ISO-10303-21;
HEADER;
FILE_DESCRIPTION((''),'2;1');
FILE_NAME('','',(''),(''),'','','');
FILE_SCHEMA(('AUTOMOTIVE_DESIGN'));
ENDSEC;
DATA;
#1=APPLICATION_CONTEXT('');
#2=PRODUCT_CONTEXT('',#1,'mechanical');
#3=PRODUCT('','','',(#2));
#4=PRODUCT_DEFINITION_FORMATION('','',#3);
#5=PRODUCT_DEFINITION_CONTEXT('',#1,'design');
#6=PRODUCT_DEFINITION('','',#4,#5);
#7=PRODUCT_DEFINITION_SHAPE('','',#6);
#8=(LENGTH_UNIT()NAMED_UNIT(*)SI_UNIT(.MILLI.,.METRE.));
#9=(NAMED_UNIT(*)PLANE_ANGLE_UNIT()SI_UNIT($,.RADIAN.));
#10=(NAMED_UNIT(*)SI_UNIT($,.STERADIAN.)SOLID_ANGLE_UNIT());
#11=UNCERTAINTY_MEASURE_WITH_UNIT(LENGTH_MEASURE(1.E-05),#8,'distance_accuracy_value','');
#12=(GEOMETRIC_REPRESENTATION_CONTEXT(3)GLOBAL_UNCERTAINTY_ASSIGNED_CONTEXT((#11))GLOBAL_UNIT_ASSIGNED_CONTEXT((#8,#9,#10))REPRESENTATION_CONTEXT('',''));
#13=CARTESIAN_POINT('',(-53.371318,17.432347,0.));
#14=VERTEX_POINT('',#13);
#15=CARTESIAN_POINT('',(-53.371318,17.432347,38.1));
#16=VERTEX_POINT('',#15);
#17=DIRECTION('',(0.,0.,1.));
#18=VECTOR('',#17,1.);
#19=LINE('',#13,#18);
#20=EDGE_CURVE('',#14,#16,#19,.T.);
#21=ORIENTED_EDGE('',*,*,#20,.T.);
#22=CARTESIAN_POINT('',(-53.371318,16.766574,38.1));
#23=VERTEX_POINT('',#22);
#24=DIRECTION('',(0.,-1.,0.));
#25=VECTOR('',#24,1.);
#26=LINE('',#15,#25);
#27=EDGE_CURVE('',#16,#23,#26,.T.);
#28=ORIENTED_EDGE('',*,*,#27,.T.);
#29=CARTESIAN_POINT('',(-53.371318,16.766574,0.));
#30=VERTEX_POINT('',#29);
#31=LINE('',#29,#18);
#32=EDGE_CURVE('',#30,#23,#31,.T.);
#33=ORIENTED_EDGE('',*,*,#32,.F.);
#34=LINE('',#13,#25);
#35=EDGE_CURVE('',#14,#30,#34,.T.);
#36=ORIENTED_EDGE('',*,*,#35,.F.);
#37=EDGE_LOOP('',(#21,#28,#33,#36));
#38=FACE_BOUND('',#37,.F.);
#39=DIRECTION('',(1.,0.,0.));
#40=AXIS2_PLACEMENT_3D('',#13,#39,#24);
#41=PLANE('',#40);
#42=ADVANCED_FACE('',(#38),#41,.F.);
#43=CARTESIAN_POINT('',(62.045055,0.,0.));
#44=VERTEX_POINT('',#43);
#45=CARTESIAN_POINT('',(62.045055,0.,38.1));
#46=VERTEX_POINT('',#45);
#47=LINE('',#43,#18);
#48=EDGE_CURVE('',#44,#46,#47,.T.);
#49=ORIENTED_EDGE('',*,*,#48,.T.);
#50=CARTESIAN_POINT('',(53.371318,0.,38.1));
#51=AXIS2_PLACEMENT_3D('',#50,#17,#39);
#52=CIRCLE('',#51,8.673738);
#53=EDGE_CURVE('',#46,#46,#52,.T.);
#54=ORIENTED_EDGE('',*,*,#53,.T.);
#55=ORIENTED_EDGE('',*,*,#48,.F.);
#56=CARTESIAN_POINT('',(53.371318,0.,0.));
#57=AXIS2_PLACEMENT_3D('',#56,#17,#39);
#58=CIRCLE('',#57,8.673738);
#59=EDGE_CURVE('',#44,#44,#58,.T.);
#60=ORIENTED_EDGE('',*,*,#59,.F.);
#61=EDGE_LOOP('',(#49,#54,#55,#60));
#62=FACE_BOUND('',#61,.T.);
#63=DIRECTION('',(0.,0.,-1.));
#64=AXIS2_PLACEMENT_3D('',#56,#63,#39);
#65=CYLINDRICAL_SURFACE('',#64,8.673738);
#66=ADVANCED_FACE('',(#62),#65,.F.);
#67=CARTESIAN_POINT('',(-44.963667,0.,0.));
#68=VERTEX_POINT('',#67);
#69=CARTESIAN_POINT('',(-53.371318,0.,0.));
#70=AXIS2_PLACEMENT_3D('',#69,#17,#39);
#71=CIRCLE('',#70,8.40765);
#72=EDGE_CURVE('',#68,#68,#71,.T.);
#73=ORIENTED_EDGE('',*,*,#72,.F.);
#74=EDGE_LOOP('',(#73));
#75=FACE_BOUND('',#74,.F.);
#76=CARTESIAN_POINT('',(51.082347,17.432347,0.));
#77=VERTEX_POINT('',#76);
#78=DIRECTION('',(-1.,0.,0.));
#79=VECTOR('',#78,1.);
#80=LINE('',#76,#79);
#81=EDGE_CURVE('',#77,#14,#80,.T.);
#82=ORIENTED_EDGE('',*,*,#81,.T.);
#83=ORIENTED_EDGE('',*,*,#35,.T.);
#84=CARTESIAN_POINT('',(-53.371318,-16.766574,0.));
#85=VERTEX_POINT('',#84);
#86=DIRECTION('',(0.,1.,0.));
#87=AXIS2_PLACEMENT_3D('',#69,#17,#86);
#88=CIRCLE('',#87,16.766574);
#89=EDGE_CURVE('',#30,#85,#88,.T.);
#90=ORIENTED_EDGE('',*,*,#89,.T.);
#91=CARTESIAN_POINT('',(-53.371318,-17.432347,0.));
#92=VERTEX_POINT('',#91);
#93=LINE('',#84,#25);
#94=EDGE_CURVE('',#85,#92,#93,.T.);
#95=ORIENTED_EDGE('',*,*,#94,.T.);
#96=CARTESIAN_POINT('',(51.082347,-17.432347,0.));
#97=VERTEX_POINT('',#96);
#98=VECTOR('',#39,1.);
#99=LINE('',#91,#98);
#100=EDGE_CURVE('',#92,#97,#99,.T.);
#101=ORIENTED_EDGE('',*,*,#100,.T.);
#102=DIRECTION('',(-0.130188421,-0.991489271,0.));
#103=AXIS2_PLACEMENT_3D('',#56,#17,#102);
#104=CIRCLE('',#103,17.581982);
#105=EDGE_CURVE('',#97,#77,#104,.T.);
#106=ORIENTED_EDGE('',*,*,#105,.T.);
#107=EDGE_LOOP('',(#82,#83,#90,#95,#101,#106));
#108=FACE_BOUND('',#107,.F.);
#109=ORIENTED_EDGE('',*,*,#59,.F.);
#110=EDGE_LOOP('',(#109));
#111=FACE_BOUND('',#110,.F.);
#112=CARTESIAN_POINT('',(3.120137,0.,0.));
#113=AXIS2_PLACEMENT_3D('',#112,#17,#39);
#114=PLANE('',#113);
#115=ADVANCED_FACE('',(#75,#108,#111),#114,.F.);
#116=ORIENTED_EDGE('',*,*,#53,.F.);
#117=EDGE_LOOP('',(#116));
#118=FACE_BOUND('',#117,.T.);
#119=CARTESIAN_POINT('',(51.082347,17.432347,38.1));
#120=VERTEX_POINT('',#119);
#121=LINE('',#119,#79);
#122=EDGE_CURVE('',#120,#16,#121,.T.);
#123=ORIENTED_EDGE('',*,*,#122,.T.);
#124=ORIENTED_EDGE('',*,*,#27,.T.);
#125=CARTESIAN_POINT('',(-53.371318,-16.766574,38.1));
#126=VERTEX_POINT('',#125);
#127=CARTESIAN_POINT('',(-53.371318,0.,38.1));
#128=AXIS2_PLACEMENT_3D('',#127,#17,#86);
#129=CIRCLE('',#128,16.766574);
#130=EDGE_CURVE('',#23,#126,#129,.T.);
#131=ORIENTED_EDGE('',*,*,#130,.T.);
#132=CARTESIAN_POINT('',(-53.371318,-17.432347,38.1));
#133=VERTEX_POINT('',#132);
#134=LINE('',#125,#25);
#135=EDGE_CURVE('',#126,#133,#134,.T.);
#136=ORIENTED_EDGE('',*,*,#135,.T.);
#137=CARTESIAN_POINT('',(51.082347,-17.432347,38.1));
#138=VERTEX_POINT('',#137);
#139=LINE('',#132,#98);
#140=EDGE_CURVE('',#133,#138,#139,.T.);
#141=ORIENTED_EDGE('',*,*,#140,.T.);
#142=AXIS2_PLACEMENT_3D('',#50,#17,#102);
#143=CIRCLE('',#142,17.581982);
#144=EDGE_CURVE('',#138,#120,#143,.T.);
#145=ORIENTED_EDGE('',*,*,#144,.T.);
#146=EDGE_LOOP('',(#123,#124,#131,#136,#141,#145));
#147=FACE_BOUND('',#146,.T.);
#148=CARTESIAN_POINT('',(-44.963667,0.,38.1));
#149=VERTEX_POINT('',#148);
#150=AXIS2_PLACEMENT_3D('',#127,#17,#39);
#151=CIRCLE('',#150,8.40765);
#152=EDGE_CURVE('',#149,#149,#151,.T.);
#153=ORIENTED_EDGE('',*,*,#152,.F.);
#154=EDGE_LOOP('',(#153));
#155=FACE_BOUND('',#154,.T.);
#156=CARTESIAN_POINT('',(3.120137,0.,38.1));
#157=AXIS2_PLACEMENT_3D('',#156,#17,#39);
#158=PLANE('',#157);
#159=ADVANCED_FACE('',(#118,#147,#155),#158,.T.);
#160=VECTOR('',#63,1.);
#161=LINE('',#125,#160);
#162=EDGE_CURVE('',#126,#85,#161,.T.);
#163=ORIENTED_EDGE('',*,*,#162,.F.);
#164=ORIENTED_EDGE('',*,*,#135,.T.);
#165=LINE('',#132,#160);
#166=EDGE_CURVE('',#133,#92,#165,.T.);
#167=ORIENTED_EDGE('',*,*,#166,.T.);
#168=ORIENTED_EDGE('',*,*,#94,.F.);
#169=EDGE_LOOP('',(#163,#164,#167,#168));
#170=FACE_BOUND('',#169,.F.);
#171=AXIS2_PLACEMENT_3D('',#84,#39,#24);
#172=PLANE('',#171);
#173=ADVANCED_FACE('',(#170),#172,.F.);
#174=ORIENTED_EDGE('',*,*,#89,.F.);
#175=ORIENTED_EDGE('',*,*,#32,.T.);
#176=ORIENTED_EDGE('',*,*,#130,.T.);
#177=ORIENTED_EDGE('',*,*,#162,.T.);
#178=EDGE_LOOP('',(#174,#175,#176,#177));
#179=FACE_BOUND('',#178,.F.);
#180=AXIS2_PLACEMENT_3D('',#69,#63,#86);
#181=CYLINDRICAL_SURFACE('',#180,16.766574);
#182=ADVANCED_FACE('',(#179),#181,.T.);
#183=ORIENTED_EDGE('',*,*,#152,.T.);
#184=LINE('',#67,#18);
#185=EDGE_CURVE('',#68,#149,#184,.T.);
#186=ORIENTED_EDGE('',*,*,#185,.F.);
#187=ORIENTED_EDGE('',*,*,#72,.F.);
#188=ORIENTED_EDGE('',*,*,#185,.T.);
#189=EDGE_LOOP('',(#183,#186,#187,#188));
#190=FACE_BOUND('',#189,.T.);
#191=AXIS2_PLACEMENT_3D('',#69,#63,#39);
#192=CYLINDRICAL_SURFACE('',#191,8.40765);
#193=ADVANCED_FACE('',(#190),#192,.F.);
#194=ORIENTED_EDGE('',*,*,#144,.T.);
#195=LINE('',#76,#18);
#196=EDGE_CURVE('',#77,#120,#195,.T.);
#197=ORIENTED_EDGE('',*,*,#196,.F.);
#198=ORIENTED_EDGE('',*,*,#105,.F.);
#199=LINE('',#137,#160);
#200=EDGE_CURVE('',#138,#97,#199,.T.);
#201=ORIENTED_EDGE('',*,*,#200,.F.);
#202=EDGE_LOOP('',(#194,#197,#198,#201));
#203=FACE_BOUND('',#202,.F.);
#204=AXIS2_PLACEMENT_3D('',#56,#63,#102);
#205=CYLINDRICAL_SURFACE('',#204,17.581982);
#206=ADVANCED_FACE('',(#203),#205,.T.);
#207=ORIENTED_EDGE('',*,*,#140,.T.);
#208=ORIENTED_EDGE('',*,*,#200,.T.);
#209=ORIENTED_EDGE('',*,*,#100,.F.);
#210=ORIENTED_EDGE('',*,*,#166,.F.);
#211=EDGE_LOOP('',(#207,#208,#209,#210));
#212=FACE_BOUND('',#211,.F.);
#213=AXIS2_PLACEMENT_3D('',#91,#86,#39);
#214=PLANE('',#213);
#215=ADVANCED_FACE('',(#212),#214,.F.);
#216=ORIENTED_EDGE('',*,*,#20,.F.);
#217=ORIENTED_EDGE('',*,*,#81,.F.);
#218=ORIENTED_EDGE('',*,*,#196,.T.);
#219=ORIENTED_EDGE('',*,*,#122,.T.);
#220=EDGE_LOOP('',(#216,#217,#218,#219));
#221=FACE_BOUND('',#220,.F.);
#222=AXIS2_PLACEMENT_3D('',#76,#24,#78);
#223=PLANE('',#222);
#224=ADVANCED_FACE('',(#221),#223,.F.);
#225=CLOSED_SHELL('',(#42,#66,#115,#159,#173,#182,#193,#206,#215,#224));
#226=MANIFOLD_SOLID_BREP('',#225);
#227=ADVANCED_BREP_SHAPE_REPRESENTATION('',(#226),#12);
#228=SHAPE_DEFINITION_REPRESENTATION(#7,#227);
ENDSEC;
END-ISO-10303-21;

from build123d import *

# Parameters (mm, degrees)
F0_R     = 8.6737376807
F1_DEPTH = 25.4
F0_R_2   = 8.4076501903
F2_DEPTH = 38.1


# Not quite as in the source:
# - a feature names something its author has since deleted; it is built from what else it names


with BuildPart() as f1:
    # F0 (on Top) → F1 (new body)
    with BuildSketch(Plane.XY):
        with BuildLine():
            ThreePointArc((51.0823471633, -17.43234694), (70.9533001066, 0), (51.0823471633, 17.43234694))
            Line((51.0823471633, 17.43234694), (-53.3713176847, 17.43234694))
            Line((-53.3713176847, 17.43234694), (-53.3713176847, 16.7665737877))
            ThreePointArc((-53.3713176847, 16.7665737877), (-41.5155596621, 11.8557580225), (-36.604743897, 0))
            ThreePointArc((-36.604743897, 0), (-41.5155596621, -11.8557580225), (-53.3713176847, -16.7665737877))
            Line((-53.3713176847, -16.7665737877), (-53.3713176847, -17.43234694))
            Line((-53.3713176847, -17.43234694), (51.0823471633, -17.43234694))
        make_face()
        with Locations((53.3713176847, 0)):
            Circle(F0_R, mode=Mode.SUBTRACT)
    extrude(amount=F1_DEPTH)

    # F0 (on Top) → F2 (join)
    with BuildSketch(Plane.XY):
        with BuildLine():
            ThreePointArc((51.0823471633, -17.43234694), (70.9533001066, 0), (51.0823471633, 17.43234694))
            Line((51.0823471633, 17.43234694), (-53.3713176847, 17.43234694))
            Line((-53.3713176847, 17.43234694), (-53.3713176847, 16.7665737877))
            ThreePointArc((-53.3713176847, 16.7665737877), (-41.5155596621, 11.8557580225), (-36.604743897, 0))
            ThreePointArc((-36.604743897, 0), (-41.5155596621, -11.8557580225), (-53.3713176847, -16.7665737877))
            Line((-53.3713176847, -16.7665737877), (-53.3713176847, -17.43234694))
            Line((-53.3713176847, -17.43234694), (51.0823471633, -17.43234694))
        make_face()
        with Locations((53.3713176847, 0)):
            Circle(F0_R, mode=Mode.SUBTRACT)
        with BuildLine():
            ThreePointArc((-36.604743897, 0), (-41.5155596621, 11.8557580225), (-53.3713176847, 16.7665737877))
            ThreePointArc((-53.3713176847, 16.7665737877), (-70.1378914723, 0), (-53.3713176847, -16.7665737877))
            ThreePointArc((-53.3713176847, -16.7665737877), (-41.5155596621, -11.8557580225), (-36.604743897, 0))
        make_face()
        with Locations((-53.3713176847, 0)):
            Circle(F0_R_2, mode=Mode.SUBTRACT)
    extrude(amount=F2_DEPTH)


solid = f1.part
